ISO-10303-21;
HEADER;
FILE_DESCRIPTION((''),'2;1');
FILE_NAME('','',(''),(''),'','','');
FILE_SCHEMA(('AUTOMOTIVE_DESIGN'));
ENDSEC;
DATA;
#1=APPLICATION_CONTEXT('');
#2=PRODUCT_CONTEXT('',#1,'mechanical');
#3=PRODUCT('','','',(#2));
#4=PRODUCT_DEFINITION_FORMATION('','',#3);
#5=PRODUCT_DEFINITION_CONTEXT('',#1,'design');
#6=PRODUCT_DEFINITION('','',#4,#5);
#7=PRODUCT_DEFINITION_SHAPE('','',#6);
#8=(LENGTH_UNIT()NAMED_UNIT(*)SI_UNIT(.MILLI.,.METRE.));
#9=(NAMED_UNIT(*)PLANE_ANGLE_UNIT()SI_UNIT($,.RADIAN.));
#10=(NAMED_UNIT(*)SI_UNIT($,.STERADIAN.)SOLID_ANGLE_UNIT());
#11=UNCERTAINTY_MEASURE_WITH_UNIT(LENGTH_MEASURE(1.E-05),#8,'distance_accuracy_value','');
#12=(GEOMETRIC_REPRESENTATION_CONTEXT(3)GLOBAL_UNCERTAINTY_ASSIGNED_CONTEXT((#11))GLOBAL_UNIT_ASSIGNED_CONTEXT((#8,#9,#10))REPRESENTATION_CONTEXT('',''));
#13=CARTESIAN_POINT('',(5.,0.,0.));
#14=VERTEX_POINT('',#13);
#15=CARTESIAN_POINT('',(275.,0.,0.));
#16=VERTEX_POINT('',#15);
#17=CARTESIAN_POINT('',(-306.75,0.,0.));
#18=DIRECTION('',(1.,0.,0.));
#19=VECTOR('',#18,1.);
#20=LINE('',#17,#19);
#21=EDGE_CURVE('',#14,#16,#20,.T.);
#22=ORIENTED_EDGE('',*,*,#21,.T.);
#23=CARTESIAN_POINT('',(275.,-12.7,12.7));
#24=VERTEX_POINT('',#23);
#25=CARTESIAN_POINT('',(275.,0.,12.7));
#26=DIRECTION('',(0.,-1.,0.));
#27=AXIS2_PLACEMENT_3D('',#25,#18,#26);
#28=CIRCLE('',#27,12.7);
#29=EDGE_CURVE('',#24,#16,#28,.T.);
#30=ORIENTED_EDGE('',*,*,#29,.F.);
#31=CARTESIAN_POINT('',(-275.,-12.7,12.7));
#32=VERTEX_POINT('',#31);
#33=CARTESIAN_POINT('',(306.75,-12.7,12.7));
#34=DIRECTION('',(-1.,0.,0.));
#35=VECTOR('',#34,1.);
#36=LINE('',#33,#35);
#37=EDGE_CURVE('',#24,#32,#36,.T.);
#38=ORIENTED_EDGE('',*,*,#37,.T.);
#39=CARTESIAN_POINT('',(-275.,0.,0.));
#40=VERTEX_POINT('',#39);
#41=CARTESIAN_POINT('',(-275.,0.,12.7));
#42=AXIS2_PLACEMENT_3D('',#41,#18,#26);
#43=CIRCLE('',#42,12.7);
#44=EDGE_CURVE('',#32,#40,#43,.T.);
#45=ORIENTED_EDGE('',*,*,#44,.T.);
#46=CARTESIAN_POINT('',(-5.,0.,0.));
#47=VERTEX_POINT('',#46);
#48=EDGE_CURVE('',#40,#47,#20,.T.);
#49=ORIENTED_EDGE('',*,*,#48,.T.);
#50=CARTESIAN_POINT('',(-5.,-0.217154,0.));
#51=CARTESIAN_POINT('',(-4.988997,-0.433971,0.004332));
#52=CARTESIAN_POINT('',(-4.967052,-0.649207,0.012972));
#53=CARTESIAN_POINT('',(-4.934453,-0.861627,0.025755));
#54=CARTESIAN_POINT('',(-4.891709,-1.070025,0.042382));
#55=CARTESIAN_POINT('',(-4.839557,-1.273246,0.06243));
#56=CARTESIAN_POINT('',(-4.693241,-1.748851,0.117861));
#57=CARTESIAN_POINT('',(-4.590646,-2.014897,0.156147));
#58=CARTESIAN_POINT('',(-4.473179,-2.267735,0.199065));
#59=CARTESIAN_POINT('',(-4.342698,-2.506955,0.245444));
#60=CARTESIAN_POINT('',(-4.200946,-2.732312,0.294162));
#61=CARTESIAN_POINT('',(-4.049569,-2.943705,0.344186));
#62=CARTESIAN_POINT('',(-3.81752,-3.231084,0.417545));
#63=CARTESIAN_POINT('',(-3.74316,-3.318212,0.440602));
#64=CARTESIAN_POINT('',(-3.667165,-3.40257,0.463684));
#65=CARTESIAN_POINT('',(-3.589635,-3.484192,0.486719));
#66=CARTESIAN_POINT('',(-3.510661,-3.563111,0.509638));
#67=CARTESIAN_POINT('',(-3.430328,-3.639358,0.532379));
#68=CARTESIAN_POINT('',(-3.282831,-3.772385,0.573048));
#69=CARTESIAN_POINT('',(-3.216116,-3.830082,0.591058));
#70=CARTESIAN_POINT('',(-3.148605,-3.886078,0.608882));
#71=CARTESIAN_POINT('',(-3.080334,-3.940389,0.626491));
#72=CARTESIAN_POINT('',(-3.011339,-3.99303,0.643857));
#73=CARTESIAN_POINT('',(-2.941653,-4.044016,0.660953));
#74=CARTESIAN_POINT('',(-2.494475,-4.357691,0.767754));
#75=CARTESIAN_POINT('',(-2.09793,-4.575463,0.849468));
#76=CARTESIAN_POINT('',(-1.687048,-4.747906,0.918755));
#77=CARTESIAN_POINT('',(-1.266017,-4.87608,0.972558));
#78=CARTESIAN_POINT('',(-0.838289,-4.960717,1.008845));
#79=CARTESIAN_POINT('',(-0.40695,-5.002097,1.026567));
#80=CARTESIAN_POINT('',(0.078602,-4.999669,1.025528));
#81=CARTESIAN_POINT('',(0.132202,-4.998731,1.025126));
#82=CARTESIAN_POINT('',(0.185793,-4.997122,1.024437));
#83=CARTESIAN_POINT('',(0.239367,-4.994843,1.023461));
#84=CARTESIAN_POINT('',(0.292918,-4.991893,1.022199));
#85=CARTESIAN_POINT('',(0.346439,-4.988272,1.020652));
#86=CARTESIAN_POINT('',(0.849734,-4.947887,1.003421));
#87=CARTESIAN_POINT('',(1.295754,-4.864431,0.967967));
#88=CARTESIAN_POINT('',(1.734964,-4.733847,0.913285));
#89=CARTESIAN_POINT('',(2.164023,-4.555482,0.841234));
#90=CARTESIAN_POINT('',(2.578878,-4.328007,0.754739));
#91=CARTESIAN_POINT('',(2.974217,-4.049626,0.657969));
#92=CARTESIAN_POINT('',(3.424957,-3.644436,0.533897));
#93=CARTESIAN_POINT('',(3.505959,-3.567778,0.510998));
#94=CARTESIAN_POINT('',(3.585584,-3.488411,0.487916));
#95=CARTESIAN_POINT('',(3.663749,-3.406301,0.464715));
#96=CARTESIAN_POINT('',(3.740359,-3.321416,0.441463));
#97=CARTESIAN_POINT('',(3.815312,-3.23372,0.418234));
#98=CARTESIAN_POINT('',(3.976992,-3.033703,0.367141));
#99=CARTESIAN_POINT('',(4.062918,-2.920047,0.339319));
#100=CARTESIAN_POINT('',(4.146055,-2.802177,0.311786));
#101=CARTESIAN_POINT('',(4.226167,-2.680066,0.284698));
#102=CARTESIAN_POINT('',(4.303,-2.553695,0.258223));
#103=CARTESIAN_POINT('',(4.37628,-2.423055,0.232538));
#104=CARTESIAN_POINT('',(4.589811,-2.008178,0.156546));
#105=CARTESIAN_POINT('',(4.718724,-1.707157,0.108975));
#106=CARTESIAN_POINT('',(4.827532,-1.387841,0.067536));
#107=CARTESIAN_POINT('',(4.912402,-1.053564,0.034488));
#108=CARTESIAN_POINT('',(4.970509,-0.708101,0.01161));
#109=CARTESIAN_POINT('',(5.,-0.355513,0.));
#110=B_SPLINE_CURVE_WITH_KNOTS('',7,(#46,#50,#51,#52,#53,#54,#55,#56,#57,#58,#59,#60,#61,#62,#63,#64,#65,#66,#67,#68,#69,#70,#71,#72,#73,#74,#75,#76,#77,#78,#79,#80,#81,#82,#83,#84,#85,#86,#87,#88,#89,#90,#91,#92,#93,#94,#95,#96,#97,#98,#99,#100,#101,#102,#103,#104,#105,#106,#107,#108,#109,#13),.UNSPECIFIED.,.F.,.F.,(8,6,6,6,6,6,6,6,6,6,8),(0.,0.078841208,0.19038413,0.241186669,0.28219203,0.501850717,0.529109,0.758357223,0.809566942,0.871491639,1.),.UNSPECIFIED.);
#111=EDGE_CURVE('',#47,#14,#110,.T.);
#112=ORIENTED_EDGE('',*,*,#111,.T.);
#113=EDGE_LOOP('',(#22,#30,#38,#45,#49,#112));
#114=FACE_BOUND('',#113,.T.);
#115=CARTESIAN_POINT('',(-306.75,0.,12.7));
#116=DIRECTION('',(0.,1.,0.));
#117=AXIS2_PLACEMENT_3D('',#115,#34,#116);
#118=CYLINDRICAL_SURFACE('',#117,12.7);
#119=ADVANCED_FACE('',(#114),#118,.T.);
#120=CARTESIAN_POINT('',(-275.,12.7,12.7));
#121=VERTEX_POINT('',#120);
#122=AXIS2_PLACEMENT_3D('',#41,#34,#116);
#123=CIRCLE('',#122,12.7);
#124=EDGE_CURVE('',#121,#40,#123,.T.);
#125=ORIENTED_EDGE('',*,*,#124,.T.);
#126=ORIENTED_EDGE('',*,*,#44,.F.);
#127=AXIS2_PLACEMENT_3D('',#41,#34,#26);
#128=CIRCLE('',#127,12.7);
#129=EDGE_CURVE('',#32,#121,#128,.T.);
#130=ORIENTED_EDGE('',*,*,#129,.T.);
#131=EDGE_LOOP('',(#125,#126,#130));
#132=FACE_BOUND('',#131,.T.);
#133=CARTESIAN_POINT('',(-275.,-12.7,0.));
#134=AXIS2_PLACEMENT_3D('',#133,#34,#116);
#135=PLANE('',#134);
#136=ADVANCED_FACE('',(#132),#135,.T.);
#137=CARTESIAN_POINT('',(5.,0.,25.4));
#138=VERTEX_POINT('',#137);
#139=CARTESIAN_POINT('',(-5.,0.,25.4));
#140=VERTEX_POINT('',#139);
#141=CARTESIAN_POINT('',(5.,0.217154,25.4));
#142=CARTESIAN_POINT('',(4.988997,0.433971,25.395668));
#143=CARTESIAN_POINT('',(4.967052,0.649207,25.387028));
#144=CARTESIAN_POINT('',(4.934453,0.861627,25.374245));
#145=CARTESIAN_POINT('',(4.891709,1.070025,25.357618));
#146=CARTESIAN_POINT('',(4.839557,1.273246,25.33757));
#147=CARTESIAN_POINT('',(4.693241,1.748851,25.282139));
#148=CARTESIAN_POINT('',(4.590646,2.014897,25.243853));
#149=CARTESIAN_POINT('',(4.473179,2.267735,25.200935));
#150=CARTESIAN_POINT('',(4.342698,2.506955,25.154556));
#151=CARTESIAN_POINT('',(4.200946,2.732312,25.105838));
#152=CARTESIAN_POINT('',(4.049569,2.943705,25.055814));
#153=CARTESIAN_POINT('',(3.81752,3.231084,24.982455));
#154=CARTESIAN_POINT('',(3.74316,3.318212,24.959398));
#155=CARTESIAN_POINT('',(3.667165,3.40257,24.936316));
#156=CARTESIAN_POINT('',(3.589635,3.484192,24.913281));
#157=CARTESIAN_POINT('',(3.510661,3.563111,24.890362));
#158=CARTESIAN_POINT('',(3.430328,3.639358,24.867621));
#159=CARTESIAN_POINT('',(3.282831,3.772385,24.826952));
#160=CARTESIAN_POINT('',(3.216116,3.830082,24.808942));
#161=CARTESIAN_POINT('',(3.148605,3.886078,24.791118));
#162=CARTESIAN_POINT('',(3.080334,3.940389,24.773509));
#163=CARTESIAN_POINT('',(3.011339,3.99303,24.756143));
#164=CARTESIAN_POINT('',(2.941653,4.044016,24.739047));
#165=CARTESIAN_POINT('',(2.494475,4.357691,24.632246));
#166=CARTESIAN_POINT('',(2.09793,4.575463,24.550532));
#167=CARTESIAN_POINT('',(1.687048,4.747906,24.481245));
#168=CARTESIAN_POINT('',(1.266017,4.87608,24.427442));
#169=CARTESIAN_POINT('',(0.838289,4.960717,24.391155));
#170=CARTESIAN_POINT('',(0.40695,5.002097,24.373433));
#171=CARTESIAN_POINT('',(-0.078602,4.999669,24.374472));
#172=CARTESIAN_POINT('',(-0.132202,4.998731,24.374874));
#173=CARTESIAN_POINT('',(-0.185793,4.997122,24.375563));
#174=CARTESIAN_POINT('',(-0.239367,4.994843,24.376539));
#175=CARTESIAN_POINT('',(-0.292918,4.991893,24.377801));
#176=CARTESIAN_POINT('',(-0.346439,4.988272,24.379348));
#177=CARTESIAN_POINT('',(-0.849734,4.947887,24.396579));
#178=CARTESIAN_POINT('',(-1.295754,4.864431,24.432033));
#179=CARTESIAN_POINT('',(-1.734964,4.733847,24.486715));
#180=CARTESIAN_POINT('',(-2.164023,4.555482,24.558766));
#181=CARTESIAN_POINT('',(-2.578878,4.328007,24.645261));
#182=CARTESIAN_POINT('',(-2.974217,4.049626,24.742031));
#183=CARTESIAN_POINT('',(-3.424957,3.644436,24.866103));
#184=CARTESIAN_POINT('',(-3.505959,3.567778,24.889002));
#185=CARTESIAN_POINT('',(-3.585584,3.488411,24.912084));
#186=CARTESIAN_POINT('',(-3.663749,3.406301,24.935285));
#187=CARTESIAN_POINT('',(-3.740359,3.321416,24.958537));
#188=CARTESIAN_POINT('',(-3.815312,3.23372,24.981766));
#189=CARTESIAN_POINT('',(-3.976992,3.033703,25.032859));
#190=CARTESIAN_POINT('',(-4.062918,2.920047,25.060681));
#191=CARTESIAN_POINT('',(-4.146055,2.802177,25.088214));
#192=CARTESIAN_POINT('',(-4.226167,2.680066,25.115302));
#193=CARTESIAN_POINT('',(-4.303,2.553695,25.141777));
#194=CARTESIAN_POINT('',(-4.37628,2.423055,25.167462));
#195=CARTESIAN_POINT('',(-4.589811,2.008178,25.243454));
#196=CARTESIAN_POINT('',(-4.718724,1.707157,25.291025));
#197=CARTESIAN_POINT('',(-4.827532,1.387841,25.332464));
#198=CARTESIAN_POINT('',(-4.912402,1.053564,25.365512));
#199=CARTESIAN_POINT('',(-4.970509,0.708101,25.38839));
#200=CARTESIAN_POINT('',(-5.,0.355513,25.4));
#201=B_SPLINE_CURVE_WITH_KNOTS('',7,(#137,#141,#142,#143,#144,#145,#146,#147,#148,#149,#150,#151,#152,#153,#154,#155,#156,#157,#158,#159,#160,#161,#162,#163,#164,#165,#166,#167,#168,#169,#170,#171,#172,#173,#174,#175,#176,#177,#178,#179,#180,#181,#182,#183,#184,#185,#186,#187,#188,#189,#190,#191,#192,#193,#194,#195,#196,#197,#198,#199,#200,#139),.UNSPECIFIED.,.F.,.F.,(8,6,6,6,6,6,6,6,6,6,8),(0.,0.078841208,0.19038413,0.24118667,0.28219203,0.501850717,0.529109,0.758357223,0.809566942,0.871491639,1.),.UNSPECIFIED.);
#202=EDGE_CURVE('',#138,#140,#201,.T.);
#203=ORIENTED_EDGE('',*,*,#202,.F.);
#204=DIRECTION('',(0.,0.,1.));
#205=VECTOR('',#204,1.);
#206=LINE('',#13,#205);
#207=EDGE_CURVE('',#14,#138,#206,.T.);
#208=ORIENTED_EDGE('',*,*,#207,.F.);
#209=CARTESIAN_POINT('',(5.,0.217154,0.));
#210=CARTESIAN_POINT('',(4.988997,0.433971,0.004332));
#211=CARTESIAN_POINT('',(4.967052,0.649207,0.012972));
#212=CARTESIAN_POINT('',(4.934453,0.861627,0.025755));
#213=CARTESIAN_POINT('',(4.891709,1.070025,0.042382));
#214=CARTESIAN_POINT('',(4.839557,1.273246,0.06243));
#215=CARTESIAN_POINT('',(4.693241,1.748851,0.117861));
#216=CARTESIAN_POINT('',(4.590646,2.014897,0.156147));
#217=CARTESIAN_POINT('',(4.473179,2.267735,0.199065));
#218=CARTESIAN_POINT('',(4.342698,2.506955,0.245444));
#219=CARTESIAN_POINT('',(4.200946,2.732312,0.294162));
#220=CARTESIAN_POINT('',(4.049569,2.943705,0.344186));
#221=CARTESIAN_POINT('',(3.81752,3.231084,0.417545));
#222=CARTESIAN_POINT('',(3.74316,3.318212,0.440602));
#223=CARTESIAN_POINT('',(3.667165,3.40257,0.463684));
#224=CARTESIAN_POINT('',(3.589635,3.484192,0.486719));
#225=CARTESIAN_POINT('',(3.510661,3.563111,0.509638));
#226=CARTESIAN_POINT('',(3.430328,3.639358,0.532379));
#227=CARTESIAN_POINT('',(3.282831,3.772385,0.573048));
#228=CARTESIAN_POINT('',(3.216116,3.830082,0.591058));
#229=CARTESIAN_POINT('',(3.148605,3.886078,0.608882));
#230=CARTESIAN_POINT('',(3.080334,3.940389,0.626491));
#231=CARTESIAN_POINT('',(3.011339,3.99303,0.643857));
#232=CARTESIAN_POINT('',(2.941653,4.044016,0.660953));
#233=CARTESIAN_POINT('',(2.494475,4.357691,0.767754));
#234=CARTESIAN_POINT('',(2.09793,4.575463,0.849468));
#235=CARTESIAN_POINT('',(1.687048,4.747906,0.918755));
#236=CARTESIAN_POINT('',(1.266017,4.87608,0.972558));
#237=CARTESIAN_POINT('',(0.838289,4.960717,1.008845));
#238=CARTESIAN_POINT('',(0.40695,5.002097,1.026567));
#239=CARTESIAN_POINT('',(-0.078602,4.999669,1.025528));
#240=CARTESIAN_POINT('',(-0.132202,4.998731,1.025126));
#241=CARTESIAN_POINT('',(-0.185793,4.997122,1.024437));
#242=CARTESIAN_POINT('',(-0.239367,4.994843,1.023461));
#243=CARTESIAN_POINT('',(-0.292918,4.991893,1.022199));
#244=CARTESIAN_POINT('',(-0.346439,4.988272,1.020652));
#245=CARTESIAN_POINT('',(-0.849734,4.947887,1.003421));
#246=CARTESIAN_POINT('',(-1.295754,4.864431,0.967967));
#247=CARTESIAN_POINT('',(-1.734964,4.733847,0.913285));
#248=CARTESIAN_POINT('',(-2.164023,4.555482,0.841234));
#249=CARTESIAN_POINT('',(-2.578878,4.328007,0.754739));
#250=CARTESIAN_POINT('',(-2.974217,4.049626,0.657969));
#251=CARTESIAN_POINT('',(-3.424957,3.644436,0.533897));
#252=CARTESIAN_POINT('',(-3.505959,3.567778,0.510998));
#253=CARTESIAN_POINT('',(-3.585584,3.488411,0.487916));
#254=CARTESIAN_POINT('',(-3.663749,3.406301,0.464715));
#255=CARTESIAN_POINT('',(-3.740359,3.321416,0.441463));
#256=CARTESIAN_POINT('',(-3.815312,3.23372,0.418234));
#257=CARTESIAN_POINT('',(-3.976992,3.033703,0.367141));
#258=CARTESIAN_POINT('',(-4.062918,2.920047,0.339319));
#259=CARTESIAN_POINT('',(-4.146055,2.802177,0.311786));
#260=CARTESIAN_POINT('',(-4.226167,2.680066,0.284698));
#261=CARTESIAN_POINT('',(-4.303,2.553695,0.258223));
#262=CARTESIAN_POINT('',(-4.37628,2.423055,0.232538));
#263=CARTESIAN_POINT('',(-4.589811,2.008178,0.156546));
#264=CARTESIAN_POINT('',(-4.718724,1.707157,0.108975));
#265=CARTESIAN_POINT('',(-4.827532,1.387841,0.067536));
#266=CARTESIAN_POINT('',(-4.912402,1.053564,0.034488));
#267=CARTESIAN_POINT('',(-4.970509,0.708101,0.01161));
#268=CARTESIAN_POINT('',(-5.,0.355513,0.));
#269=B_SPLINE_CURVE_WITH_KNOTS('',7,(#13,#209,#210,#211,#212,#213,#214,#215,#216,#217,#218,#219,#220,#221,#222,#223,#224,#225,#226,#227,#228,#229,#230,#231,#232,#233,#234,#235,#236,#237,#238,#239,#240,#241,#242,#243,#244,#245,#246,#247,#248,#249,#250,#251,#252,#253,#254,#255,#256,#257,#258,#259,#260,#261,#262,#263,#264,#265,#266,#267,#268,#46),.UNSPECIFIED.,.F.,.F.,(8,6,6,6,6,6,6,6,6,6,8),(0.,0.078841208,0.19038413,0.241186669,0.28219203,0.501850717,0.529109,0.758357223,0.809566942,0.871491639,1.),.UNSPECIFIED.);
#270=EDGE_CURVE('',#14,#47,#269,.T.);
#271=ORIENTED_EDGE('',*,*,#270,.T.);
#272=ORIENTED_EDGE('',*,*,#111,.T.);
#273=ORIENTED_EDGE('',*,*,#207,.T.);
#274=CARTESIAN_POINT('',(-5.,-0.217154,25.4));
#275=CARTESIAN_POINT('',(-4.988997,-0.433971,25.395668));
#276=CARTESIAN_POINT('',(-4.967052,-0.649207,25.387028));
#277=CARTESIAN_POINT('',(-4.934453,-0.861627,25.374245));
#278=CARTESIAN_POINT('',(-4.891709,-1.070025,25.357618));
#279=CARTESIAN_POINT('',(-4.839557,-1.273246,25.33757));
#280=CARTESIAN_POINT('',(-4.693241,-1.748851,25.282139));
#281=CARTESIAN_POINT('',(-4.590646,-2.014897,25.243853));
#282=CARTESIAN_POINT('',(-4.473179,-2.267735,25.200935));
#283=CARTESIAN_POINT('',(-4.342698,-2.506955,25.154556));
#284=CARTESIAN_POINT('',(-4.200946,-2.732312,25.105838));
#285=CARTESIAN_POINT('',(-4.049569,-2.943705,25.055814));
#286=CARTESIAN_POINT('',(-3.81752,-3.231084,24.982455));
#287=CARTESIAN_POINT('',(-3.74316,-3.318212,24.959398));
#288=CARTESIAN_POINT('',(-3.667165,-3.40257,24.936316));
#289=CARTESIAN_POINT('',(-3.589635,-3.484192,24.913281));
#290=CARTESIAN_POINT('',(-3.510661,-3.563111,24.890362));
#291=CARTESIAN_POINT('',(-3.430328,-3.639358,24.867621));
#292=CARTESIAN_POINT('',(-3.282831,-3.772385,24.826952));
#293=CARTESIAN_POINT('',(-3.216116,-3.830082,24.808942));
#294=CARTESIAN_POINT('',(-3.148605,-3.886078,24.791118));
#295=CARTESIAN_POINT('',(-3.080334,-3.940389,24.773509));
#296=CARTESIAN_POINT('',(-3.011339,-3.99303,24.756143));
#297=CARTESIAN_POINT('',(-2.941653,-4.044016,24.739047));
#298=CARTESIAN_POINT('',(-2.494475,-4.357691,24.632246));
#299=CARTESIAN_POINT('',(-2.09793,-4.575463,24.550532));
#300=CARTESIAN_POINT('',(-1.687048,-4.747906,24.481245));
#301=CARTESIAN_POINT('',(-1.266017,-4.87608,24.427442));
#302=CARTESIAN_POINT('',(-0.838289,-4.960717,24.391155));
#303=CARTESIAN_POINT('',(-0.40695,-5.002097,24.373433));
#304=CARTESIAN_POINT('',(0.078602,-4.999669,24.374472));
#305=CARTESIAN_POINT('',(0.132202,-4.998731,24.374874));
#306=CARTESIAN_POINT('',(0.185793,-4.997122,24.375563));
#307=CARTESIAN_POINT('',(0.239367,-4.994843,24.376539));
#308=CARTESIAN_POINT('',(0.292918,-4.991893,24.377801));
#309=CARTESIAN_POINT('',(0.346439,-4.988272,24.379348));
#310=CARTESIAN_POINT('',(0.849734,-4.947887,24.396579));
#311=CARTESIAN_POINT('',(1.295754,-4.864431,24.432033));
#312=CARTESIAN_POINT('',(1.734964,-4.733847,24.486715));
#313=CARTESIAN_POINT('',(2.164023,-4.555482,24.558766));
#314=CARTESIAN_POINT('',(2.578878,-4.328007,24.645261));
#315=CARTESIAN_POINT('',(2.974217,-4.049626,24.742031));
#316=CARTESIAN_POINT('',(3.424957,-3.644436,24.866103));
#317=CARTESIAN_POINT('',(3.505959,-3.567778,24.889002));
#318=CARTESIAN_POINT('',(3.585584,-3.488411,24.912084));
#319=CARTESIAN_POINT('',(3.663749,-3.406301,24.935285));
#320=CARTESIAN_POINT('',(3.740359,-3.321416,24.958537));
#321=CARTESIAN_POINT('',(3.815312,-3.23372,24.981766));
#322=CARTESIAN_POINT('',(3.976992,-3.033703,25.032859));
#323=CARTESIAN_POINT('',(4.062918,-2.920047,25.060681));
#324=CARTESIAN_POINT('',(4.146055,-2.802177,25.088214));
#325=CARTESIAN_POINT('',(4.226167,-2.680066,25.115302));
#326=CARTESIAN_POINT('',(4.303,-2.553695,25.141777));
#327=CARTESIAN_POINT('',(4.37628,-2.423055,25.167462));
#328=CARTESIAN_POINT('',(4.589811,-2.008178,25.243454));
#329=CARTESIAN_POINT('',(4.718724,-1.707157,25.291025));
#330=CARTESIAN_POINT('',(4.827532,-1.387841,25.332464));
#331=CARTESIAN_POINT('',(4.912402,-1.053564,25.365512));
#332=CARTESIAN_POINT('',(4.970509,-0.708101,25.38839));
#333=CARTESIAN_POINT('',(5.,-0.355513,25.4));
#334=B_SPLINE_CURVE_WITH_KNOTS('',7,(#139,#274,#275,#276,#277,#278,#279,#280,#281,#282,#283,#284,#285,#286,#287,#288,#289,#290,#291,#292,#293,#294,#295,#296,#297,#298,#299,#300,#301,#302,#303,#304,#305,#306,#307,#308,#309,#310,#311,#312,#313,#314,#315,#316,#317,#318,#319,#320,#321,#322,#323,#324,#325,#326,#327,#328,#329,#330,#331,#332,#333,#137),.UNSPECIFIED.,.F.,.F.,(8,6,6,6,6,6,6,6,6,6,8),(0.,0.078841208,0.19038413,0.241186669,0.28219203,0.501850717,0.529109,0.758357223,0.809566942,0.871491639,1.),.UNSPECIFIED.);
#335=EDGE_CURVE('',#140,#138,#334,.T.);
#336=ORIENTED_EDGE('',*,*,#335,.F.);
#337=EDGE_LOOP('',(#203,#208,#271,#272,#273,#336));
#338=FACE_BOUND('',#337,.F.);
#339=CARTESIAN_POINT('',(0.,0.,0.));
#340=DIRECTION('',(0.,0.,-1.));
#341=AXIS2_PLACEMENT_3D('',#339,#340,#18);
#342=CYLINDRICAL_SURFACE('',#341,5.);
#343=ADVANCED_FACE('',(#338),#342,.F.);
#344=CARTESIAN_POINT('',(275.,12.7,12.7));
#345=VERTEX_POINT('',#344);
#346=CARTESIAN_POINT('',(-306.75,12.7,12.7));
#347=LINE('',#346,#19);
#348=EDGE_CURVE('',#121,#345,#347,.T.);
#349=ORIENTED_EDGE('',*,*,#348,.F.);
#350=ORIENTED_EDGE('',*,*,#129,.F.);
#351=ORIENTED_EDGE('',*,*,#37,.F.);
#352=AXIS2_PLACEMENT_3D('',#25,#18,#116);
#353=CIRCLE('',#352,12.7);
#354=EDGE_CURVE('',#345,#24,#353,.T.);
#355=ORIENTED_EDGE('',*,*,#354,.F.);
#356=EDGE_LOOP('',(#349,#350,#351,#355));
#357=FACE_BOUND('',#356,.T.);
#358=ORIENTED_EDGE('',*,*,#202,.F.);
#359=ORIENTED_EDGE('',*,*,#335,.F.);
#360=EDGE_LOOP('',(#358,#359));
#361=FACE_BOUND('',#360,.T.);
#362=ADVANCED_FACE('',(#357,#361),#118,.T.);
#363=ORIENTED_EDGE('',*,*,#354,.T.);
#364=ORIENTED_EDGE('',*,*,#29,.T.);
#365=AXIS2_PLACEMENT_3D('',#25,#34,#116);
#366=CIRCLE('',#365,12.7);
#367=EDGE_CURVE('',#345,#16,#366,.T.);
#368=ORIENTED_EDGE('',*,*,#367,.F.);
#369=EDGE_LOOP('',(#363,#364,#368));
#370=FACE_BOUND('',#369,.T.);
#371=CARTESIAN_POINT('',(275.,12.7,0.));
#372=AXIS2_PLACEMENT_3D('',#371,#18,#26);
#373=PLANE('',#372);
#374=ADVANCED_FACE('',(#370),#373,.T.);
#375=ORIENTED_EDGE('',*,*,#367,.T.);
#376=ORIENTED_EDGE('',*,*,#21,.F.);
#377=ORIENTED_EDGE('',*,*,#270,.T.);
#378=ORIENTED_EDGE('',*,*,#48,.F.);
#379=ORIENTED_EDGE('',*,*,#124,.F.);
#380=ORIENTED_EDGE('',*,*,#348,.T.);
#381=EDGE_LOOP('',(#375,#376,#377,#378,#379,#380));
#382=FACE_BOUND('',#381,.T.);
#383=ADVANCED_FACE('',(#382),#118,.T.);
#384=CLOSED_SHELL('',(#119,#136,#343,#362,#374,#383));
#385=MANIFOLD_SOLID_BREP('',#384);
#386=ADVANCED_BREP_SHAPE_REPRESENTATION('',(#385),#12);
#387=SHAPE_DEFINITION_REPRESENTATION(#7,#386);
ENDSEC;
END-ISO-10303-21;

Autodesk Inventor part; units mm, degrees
ref_plane "YZ Plane" through (0, 0, 0) normal (1, 0, 0) x (0, 1, 0)
ref_plane "XZ Plane" through (0, 0, 0) normal (0, 1, 0) x (-1, 0, 0)
ref_plane "XY Plane" through (0, 0, 0) normal (0, 0, 1) x (1, 0, 0)
sketch "Sketch1" plane through (0, 0, 0) normal (0, 0, 1) x (1, 0, 0)
  line L0 (-275, 12.7) -> (275, 12.7)
  line L1 (275, 12.7) -> (275, -12.7)
  line L2 (275, -12.7) -> (-275, -12.7)
  line L3 (-275, -12.7) -> (-275, 12.7)
  line L4 (-275, 12.7) -> (275, -12.7) construction
  line L5 (275, 12.7) -> (-275, -12.7) construction
  circle A0 centre (0, 0) radius 5
  dimension "d0" = 550
  dimension "d1" = 25.4
  dimension "d2" = 10
extrude "Extrusion1" add sketch "Sketch1" along normal blind 25.4
fillet "Fillet1" radius 12.7 4 edges at (0, 12.7, 0) (0, -12.7, 0) (0, 12.7, 25.4) (0, -12.7, 25.4)
properties part number "Eixo_dianteiro"
